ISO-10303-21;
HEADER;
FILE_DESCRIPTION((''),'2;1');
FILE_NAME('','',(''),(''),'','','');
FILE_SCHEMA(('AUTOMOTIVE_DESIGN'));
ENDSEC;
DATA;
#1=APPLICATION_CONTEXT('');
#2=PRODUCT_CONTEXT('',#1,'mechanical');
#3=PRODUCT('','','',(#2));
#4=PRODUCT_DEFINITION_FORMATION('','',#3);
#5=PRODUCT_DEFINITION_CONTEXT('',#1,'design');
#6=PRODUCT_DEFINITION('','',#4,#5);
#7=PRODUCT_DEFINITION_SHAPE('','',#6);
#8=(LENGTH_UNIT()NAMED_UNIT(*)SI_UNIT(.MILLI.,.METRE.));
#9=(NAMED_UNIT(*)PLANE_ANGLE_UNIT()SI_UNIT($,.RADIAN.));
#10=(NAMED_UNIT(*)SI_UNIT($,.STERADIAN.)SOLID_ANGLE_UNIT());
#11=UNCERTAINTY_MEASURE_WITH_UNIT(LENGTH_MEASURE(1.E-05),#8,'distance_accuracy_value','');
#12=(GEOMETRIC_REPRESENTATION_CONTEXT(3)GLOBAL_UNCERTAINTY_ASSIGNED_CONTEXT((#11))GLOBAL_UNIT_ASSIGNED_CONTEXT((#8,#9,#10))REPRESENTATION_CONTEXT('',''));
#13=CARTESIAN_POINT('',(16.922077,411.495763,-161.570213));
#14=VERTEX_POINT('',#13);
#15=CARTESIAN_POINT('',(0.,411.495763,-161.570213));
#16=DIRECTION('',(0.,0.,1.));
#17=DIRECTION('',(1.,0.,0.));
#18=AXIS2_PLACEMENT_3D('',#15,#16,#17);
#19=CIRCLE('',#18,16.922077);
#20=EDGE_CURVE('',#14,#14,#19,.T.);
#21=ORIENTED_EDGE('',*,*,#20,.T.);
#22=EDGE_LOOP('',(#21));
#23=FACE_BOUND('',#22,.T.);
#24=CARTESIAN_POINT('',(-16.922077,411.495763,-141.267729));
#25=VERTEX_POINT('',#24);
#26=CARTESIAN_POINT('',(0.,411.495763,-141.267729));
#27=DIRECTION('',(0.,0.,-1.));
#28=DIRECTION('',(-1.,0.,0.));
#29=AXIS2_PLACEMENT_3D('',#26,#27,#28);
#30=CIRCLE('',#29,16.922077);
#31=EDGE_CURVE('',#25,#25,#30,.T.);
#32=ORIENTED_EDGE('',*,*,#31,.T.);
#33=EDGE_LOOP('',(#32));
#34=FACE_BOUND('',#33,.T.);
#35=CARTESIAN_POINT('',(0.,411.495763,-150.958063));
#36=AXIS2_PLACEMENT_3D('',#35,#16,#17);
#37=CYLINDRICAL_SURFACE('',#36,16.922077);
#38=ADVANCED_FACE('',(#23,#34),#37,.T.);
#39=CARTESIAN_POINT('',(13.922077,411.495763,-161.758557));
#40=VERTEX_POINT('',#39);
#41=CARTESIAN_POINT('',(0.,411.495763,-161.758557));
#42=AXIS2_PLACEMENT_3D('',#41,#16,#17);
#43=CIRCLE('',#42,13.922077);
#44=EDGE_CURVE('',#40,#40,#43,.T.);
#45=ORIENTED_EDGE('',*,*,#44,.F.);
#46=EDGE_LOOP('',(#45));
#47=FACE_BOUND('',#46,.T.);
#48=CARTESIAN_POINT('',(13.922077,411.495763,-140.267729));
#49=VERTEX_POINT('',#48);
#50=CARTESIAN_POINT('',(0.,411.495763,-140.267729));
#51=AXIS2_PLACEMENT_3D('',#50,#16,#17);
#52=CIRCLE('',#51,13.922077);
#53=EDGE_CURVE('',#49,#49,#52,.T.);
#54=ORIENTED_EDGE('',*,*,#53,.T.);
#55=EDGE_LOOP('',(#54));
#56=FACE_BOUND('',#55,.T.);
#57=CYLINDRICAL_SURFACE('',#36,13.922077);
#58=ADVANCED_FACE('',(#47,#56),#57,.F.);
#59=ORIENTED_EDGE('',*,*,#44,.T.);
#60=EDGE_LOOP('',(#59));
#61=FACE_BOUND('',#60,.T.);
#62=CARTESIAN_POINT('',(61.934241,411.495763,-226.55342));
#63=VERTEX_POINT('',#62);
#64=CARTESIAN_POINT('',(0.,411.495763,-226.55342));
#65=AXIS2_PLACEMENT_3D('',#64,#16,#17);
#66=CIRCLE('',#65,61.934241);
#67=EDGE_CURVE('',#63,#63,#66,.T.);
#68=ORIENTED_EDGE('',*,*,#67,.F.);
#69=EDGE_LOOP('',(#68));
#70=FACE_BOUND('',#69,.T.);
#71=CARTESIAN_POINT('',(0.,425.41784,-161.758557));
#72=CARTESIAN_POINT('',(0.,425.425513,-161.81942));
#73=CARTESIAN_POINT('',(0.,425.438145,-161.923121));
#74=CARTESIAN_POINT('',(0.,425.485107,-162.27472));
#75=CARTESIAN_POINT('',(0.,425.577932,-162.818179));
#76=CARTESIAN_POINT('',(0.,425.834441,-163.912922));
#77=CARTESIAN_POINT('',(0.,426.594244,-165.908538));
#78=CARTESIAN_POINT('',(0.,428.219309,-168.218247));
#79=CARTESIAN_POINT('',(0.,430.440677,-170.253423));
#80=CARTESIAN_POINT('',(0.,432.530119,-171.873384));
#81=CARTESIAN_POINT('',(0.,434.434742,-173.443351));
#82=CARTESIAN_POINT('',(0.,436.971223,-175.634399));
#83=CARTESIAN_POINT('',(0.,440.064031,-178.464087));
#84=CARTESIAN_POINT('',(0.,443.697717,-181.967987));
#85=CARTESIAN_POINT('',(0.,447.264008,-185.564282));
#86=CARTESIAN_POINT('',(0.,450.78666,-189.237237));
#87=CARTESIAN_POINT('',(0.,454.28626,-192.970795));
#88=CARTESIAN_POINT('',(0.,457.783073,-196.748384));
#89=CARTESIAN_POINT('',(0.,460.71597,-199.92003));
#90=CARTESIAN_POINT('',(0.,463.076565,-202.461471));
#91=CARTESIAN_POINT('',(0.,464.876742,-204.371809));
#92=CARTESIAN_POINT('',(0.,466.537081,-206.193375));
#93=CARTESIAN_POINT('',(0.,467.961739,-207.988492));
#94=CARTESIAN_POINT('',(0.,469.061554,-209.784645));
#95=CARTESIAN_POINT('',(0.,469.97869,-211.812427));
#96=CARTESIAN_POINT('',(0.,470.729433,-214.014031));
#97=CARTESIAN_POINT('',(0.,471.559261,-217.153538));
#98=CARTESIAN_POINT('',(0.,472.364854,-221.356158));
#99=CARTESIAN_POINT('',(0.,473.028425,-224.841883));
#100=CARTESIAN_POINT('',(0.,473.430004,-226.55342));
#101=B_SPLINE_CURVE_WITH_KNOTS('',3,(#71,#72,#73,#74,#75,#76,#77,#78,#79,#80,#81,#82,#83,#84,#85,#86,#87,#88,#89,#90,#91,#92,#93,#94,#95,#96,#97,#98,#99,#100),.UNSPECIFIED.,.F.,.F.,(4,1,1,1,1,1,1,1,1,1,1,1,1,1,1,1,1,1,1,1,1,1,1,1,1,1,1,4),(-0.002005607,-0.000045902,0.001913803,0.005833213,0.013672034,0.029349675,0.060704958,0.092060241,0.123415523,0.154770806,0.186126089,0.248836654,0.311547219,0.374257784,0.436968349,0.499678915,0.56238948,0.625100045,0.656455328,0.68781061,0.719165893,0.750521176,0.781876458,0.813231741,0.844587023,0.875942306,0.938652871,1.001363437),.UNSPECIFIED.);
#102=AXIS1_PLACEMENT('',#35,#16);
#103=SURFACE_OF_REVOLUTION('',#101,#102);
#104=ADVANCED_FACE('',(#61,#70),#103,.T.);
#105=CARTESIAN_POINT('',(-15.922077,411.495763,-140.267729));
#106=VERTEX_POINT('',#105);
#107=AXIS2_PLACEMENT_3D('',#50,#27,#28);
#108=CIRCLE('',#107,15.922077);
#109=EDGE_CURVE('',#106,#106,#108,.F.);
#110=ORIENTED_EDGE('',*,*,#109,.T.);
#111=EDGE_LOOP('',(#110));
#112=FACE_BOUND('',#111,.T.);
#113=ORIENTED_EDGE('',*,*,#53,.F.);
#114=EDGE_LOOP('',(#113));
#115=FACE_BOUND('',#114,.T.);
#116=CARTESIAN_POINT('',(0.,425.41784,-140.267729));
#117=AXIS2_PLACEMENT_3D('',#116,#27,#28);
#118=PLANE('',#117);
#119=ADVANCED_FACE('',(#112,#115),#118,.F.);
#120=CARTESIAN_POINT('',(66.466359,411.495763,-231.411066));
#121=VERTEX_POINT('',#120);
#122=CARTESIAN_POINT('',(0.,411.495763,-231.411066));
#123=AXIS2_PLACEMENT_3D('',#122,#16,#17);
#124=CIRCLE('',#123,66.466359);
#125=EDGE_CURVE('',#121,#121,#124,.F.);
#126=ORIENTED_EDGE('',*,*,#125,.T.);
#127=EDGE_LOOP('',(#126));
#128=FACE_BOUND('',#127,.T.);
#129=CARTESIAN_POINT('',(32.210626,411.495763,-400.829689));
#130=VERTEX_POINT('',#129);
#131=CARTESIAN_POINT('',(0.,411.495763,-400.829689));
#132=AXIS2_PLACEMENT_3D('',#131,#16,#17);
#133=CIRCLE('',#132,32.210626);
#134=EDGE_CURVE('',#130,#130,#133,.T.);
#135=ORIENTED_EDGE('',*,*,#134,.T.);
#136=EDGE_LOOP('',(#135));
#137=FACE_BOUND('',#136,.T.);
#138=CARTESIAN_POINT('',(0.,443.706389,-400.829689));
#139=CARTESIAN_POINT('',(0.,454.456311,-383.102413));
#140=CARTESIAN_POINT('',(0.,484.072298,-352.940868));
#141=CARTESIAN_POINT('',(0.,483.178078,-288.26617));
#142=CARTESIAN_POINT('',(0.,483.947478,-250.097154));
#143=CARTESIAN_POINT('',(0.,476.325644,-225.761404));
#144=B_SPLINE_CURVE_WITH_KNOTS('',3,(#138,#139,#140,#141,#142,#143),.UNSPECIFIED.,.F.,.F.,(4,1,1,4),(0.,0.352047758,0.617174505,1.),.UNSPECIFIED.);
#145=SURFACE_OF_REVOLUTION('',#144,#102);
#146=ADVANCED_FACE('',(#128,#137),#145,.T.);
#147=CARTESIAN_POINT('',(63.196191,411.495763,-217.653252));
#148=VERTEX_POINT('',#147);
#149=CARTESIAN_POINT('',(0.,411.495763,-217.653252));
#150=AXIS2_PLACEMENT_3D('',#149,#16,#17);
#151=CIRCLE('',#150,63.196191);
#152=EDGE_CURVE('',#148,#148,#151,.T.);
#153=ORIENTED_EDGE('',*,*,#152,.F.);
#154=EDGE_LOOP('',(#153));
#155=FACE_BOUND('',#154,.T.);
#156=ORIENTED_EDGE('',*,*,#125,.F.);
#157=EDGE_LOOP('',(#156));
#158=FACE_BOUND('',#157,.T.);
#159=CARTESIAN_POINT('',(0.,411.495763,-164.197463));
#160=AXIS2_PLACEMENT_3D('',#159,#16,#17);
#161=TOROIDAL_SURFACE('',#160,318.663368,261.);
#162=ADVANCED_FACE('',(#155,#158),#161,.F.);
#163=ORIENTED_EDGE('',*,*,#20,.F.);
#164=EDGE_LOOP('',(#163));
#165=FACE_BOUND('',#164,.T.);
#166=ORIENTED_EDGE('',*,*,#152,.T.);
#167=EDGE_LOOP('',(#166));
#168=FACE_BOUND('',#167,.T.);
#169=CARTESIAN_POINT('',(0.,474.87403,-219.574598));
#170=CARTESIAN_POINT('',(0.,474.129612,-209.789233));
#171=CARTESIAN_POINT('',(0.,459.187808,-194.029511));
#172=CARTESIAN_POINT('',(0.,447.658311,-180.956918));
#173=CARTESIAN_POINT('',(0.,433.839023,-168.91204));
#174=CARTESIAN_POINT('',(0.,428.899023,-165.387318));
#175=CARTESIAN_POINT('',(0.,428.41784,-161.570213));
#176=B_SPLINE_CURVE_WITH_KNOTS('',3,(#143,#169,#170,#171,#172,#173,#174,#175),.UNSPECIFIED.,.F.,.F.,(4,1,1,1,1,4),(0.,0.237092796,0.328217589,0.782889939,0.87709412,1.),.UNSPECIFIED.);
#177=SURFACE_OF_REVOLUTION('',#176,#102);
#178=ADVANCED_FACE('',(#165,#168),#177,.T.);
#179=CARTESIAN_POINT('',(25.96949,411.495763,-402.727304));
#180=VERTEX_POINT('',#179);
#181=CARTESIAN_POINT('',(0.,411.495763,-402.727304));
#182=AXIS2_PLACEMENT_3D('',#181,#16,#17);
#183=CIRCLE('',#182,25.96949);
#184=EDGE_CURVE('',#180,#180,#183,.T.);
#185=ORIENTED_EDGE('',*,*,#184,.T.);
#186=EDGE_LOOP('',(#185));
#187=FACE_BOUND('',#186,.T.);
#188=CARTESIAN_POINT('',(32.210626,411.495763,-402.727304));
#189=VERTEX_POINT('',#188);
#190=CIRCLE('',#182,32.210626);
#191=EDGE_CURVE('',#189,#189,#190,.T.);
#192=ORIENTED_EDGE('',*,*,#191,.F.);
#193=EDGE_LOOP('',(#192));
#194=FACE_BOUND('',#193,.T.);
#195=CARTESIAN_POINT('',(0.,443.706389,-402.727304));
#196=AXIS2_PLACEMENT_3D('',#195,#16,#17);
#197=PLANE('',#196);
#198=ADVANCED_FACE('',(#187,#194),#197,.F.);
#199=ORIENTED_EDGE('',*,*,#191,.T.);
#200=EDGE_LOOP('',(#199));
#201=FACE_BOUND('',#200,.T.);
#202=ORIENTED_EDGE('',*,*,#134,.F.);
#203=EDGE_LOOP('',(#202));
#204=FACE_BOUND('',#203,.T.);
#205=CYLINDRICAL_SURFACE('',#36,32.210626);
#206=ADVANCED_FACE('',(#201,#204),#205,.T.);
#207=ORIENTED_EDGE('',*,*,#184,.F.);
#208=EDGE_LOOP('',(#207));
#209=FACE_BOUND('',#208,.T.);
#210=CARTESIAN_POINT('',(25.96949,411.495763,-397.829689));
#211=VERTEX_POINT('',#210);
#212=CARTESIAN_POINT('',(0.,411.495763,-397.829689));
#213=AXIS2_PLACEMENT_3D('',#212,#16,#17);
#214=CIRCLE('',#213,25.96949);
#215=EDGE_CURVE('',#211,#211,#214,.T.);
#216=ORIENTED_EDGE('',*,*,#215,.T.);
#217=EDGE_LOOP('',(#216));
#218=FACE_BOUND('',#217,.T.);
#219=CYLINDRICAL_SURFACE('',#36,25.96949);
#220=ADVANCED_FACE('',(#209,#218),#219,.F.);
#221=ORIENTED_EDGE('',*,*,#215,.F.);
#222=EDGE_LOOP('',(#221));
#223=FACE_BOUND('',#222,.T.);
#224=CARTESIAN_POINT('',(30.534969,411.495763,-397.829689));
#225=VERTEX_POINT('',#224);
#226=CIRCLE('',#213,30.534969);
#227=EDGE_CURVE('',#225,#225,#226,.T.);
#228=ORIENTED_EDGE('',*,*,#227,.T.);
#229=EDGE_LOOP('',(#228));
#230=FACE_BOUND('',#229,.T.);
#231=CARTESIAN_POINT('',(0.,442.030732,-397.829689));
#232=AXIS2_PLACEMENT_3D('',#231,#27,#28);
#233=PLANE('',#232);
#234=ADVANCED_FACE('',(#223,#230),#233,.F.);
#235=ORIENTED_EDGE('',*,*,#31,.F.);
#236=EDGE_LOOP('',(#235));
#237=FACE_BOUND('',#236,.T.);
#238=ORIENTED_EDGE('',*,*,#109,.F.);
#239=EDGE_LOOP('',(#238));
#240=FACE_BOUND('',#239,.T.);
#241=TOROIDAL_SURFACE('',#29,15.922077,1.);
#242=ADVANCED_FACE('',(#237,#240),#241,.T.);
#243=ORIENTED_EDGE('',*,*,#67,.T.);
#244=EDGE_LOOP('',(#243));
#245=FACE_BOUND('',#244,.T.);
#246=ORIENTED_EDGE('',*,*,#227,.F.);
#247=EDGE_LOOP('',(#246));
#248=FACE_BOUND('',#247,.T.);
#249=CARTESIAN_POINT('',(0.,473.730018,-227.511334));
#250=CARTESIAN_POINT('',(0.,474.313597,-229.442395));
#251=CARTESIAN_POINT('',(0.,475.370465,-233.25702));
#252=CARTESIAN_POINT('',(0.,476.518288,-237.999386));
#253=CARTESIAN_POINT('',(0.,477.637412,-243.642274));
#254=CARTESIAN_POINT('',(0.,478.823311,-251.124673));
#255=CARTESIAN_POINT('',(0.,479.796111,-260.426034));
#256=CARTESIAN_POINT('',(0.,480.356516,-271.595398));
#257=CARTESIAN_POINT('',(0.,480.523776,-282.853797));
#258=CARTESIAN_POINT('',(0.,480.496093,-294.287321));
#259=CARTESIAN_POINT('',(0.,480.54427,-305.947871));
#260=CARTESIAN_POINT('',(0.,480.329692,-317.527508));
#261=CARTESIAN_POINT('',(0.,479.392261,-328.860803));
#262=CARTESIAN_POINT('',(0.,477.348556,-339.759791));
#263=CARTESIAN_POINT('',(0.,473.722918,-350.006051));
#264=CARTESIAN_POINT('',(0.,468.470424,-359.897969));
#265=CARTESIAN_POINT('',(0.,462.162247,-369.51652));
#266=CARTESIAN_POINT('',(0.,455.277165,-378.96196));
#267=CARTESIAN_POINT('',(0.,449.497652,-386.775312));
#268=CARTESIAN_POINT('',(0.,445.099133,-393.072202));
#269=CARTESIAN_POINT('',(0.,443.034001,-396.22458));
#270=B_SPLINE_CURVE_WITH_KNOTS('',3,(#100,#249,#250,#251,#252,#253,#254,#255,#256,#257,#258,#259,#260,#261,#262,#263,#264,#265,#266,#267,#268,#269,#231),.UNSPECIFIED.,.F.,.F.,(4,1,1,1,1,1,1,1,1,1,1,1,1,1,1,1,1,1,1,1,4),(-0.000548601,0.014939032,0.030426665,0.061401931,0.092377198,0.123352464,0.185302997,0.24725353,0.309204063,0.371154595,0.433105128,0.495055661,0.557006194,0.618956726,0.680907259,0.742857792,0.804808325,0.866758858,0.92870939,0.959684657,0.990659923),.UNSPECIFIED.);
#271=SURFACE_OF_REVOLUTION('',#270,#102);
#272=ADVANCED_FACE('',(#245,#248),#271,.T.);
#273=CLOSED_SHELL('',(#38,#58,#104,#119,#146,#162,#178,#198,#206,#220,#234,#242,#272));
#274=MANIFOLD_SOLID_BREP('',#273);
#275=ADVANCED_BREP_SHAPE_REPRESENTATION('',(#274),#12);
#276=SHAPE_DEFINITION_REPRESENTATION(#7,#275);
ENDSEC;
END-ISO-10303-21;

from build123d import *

# Parameters (mm, degrees)
FILLET1_R = 1
FILLET2_R = 261


with BuildPart() as part:
    # Sketch1 → Revolve1 (revolve)
    with BuildSketch(Plane(origin=(0, 0, 0), x_dir=(0, 0, -1), z_dir=(1, 0, 0)), mode=Mode.PRIVATE) as revolve1_sk:
        with BuildLine():
            Line((397.829689357, 442.030732016), (397.829689357, 437.465253038))
            Line((397.829689357, 437.465253038), (402.727304025, 437.465253038))
            Line((402.727304025, 437.465253038), (402.727304025, 443.706389044))
            Line((402.727304025, 443.706389044), (400.829689357, 443.706389044))
            add(Edge.make_bspline(
                [(225.76140421, 476.325643568), (250.097154316, 483.947478248), (288.266169539, 483.178078388), (352.940868229, 484.072298296), (383.102413409, 454.45631069), (400.829689357, 443.706389044)],
                knots=[0, 0, 0, 0, 0.382825495, 0.647952242, 1, 1, 1, 1], degree=3))
            add(Edge.make_bspline(
                [(161.570212669, 428.417840368), (165.387317703, 428.899023227), (168.912039636, 433.839023317), (180.956918186, 447.658310633), (194.029510768, 459.18780802), (209.789233312, 474.129612163), (219.574597702, 474.874030186), (225.76140421, 476.325643568)],
                knots=[0, 0, 0, 0, 0.12290588, 0.217110061, 0.671782411, 0.762907204, 1, 1, 1, 1], degree=3))
            Line((161.570212669, 428.417840368), (140.267729398, 428.417840368))
            Line((140.267729398, 428.417840368), (140.267729398, 425.417840368))
            Line((140.267729398, 425.417840368), (143.267729398, 425.417840368))
            Line((143.267729398, 425.417840368), (161.758556822, 425.417840368))
            add(Edge.make_bspline(
                [(161.758556822, 425.417840368), (161.819419658, 425.425512714), (161.923120579, 425.438145407), (162.27472043, 425.485106802), (162.818178628, 425.577931536), (163.912921631, 425.834440667), (165.908538221, 426.594243839), (168.218246537, 428.219309129), (170.253422656, 430.440677458), (171.873383547, 432.530119229), (173.443350782, 434.434741866), (175.634399053, 436.971222574), (178.464087021, 440.064030863), (181.967987343, 443.697716995), (185.564282324, 447.264008099), (189.237236912, 450.786660258), (192.970794515, 454.286260441), (196.748383607, 457.783072867), (199.920029625, 460.715970122), (202.461471471, 463.076565309), (204.3718093, 464.876742197), (206.193375261, 466.537080564), (207.988492092, 467.961738555), (209.784645287, 469.061554178), (211.812427443, 469.978689704), (214.014031173, 470.729433057), (217.153537993, 471.559261311), (221.356158221, 472.364854147), (224.841883019, 473.028424928), (226.55341987, 473.430003641)],
                knots=[-0.002005607, -0.002005607, -0.002005607, -0.002005607, -4.5902e-05, 0.001913803, 0.005833213, 0.013672034, 0.029349675, 0.060704958, 0.092060241, 0.123415523, 0.154770806, 0.186126089, 0.248836654, 0.311547219, 0.374257784, 0.436968349, 0.499678915, 0.56238948, 0.625100045, 0.656455328, 0.68781061, 0.719165893, 0.750521176, 0.781876458, 0.813231741, 0.844587023, 0.875942306, 0.938652871, 1.001363437, 1.001363437, 1.001363437, 1.001363437], degree=3))
            add(Edge.make_bspline(
                [(226.55341987, 473.430003641), (227.511334155, 473.730017583), (229.442395327, 474.313596579), (233.257020054, 475.370464775), (237.999385717, 476.518287604), (243.642274172, 477.63741249), (251.124673243, 478.823310695), (260.426034201, 479.796111148), (271.595398427, 480.356515998), (282.853796923, 480.523776333), (294.28732145, 480.496092928), (305.947870926, 480.5442697), (317.52750784, 480.329692321), (328.860803115, 479.392260986), (339.759791402, 477.348556138), (350.006050712, 473.722918078), (359.897969321, 468.470424151), (369.516520294, 462.162246785), (378.961959726, 455.277164683), (386.77531157, 449.497652391), (393.072202451, 445.099132849), (396.224580081, 443.034000768), (397.829689357, 442.030732016)],
                knots=[-0.000548601, -0.000548601, -0.000548601, -0.000548601, 0.014939032, 0.030426665, 0.061401931, 0.092377198, 0.123352464, 0.185302997, 0.24725353, 0.309204063, 0.371154595, 0.433105128, 0.495055661, 0.557006194, 0.618956726, 0.680907259, 0.742857792, 0.804808325, 0.866758858, 0.92870939, 0.959684657, 0.990659923, 0.990659923, 0.990659923, 0.990659923], degree=3))
        make_face()
    revolve(revolve1_sk.sketch.rotate(Axis((0, 411.495763099, -150.958062518), (0, 0, -1)), 90), axis=Axis((0, 411.495763099, -150.958062518), (0, 0, -1)))

    # Fillet1
    fillet1_edges = [part.edges().sort_by_distance(p)[0] for p in [
        (-16.922077268, 411.495763099, -140.267729398),
    ]]
    fillet(fillet1_edges, radius=FILLET1_R)

    # Fillet2
    # the kernel refuses this fillet: 261 mm, written as the material it adds along each edge
    with BuildSketch(Plane(origin=(0, 411.495763099, -225.76140421), x_dir=(1, 0, 0), z_dir=(0, 1, 0))) as fillet2_piece_1:
        with BuildLine():
            CenterArc((318.663368191, -61.563941431), FILLET2_R, 165.07684079, 3.104697334)
            Line((66.466358924, 5.649662228), (65.457570887, 5.918516643))
            ThreePointArc((65.457570887, 5.918516643), (64.675756472, 3.106461833), (63.833600693, 0.312029821))
            Line((63.833600693, 0.312029821), (63.813482761, 0.238477882))
            ThreePointArc((63.813482761, 0.238477882), (62.964491393, -3.853314586), (62.174322305, -7.894329204))
            Line((62.174322305, -7.894329204), (63.196191014, -8.10815236))
        make_face()
    revolve(axis=Axis((0, 411.495763099, -225.76140421), (0, 0, -1)))


solid = part.part
